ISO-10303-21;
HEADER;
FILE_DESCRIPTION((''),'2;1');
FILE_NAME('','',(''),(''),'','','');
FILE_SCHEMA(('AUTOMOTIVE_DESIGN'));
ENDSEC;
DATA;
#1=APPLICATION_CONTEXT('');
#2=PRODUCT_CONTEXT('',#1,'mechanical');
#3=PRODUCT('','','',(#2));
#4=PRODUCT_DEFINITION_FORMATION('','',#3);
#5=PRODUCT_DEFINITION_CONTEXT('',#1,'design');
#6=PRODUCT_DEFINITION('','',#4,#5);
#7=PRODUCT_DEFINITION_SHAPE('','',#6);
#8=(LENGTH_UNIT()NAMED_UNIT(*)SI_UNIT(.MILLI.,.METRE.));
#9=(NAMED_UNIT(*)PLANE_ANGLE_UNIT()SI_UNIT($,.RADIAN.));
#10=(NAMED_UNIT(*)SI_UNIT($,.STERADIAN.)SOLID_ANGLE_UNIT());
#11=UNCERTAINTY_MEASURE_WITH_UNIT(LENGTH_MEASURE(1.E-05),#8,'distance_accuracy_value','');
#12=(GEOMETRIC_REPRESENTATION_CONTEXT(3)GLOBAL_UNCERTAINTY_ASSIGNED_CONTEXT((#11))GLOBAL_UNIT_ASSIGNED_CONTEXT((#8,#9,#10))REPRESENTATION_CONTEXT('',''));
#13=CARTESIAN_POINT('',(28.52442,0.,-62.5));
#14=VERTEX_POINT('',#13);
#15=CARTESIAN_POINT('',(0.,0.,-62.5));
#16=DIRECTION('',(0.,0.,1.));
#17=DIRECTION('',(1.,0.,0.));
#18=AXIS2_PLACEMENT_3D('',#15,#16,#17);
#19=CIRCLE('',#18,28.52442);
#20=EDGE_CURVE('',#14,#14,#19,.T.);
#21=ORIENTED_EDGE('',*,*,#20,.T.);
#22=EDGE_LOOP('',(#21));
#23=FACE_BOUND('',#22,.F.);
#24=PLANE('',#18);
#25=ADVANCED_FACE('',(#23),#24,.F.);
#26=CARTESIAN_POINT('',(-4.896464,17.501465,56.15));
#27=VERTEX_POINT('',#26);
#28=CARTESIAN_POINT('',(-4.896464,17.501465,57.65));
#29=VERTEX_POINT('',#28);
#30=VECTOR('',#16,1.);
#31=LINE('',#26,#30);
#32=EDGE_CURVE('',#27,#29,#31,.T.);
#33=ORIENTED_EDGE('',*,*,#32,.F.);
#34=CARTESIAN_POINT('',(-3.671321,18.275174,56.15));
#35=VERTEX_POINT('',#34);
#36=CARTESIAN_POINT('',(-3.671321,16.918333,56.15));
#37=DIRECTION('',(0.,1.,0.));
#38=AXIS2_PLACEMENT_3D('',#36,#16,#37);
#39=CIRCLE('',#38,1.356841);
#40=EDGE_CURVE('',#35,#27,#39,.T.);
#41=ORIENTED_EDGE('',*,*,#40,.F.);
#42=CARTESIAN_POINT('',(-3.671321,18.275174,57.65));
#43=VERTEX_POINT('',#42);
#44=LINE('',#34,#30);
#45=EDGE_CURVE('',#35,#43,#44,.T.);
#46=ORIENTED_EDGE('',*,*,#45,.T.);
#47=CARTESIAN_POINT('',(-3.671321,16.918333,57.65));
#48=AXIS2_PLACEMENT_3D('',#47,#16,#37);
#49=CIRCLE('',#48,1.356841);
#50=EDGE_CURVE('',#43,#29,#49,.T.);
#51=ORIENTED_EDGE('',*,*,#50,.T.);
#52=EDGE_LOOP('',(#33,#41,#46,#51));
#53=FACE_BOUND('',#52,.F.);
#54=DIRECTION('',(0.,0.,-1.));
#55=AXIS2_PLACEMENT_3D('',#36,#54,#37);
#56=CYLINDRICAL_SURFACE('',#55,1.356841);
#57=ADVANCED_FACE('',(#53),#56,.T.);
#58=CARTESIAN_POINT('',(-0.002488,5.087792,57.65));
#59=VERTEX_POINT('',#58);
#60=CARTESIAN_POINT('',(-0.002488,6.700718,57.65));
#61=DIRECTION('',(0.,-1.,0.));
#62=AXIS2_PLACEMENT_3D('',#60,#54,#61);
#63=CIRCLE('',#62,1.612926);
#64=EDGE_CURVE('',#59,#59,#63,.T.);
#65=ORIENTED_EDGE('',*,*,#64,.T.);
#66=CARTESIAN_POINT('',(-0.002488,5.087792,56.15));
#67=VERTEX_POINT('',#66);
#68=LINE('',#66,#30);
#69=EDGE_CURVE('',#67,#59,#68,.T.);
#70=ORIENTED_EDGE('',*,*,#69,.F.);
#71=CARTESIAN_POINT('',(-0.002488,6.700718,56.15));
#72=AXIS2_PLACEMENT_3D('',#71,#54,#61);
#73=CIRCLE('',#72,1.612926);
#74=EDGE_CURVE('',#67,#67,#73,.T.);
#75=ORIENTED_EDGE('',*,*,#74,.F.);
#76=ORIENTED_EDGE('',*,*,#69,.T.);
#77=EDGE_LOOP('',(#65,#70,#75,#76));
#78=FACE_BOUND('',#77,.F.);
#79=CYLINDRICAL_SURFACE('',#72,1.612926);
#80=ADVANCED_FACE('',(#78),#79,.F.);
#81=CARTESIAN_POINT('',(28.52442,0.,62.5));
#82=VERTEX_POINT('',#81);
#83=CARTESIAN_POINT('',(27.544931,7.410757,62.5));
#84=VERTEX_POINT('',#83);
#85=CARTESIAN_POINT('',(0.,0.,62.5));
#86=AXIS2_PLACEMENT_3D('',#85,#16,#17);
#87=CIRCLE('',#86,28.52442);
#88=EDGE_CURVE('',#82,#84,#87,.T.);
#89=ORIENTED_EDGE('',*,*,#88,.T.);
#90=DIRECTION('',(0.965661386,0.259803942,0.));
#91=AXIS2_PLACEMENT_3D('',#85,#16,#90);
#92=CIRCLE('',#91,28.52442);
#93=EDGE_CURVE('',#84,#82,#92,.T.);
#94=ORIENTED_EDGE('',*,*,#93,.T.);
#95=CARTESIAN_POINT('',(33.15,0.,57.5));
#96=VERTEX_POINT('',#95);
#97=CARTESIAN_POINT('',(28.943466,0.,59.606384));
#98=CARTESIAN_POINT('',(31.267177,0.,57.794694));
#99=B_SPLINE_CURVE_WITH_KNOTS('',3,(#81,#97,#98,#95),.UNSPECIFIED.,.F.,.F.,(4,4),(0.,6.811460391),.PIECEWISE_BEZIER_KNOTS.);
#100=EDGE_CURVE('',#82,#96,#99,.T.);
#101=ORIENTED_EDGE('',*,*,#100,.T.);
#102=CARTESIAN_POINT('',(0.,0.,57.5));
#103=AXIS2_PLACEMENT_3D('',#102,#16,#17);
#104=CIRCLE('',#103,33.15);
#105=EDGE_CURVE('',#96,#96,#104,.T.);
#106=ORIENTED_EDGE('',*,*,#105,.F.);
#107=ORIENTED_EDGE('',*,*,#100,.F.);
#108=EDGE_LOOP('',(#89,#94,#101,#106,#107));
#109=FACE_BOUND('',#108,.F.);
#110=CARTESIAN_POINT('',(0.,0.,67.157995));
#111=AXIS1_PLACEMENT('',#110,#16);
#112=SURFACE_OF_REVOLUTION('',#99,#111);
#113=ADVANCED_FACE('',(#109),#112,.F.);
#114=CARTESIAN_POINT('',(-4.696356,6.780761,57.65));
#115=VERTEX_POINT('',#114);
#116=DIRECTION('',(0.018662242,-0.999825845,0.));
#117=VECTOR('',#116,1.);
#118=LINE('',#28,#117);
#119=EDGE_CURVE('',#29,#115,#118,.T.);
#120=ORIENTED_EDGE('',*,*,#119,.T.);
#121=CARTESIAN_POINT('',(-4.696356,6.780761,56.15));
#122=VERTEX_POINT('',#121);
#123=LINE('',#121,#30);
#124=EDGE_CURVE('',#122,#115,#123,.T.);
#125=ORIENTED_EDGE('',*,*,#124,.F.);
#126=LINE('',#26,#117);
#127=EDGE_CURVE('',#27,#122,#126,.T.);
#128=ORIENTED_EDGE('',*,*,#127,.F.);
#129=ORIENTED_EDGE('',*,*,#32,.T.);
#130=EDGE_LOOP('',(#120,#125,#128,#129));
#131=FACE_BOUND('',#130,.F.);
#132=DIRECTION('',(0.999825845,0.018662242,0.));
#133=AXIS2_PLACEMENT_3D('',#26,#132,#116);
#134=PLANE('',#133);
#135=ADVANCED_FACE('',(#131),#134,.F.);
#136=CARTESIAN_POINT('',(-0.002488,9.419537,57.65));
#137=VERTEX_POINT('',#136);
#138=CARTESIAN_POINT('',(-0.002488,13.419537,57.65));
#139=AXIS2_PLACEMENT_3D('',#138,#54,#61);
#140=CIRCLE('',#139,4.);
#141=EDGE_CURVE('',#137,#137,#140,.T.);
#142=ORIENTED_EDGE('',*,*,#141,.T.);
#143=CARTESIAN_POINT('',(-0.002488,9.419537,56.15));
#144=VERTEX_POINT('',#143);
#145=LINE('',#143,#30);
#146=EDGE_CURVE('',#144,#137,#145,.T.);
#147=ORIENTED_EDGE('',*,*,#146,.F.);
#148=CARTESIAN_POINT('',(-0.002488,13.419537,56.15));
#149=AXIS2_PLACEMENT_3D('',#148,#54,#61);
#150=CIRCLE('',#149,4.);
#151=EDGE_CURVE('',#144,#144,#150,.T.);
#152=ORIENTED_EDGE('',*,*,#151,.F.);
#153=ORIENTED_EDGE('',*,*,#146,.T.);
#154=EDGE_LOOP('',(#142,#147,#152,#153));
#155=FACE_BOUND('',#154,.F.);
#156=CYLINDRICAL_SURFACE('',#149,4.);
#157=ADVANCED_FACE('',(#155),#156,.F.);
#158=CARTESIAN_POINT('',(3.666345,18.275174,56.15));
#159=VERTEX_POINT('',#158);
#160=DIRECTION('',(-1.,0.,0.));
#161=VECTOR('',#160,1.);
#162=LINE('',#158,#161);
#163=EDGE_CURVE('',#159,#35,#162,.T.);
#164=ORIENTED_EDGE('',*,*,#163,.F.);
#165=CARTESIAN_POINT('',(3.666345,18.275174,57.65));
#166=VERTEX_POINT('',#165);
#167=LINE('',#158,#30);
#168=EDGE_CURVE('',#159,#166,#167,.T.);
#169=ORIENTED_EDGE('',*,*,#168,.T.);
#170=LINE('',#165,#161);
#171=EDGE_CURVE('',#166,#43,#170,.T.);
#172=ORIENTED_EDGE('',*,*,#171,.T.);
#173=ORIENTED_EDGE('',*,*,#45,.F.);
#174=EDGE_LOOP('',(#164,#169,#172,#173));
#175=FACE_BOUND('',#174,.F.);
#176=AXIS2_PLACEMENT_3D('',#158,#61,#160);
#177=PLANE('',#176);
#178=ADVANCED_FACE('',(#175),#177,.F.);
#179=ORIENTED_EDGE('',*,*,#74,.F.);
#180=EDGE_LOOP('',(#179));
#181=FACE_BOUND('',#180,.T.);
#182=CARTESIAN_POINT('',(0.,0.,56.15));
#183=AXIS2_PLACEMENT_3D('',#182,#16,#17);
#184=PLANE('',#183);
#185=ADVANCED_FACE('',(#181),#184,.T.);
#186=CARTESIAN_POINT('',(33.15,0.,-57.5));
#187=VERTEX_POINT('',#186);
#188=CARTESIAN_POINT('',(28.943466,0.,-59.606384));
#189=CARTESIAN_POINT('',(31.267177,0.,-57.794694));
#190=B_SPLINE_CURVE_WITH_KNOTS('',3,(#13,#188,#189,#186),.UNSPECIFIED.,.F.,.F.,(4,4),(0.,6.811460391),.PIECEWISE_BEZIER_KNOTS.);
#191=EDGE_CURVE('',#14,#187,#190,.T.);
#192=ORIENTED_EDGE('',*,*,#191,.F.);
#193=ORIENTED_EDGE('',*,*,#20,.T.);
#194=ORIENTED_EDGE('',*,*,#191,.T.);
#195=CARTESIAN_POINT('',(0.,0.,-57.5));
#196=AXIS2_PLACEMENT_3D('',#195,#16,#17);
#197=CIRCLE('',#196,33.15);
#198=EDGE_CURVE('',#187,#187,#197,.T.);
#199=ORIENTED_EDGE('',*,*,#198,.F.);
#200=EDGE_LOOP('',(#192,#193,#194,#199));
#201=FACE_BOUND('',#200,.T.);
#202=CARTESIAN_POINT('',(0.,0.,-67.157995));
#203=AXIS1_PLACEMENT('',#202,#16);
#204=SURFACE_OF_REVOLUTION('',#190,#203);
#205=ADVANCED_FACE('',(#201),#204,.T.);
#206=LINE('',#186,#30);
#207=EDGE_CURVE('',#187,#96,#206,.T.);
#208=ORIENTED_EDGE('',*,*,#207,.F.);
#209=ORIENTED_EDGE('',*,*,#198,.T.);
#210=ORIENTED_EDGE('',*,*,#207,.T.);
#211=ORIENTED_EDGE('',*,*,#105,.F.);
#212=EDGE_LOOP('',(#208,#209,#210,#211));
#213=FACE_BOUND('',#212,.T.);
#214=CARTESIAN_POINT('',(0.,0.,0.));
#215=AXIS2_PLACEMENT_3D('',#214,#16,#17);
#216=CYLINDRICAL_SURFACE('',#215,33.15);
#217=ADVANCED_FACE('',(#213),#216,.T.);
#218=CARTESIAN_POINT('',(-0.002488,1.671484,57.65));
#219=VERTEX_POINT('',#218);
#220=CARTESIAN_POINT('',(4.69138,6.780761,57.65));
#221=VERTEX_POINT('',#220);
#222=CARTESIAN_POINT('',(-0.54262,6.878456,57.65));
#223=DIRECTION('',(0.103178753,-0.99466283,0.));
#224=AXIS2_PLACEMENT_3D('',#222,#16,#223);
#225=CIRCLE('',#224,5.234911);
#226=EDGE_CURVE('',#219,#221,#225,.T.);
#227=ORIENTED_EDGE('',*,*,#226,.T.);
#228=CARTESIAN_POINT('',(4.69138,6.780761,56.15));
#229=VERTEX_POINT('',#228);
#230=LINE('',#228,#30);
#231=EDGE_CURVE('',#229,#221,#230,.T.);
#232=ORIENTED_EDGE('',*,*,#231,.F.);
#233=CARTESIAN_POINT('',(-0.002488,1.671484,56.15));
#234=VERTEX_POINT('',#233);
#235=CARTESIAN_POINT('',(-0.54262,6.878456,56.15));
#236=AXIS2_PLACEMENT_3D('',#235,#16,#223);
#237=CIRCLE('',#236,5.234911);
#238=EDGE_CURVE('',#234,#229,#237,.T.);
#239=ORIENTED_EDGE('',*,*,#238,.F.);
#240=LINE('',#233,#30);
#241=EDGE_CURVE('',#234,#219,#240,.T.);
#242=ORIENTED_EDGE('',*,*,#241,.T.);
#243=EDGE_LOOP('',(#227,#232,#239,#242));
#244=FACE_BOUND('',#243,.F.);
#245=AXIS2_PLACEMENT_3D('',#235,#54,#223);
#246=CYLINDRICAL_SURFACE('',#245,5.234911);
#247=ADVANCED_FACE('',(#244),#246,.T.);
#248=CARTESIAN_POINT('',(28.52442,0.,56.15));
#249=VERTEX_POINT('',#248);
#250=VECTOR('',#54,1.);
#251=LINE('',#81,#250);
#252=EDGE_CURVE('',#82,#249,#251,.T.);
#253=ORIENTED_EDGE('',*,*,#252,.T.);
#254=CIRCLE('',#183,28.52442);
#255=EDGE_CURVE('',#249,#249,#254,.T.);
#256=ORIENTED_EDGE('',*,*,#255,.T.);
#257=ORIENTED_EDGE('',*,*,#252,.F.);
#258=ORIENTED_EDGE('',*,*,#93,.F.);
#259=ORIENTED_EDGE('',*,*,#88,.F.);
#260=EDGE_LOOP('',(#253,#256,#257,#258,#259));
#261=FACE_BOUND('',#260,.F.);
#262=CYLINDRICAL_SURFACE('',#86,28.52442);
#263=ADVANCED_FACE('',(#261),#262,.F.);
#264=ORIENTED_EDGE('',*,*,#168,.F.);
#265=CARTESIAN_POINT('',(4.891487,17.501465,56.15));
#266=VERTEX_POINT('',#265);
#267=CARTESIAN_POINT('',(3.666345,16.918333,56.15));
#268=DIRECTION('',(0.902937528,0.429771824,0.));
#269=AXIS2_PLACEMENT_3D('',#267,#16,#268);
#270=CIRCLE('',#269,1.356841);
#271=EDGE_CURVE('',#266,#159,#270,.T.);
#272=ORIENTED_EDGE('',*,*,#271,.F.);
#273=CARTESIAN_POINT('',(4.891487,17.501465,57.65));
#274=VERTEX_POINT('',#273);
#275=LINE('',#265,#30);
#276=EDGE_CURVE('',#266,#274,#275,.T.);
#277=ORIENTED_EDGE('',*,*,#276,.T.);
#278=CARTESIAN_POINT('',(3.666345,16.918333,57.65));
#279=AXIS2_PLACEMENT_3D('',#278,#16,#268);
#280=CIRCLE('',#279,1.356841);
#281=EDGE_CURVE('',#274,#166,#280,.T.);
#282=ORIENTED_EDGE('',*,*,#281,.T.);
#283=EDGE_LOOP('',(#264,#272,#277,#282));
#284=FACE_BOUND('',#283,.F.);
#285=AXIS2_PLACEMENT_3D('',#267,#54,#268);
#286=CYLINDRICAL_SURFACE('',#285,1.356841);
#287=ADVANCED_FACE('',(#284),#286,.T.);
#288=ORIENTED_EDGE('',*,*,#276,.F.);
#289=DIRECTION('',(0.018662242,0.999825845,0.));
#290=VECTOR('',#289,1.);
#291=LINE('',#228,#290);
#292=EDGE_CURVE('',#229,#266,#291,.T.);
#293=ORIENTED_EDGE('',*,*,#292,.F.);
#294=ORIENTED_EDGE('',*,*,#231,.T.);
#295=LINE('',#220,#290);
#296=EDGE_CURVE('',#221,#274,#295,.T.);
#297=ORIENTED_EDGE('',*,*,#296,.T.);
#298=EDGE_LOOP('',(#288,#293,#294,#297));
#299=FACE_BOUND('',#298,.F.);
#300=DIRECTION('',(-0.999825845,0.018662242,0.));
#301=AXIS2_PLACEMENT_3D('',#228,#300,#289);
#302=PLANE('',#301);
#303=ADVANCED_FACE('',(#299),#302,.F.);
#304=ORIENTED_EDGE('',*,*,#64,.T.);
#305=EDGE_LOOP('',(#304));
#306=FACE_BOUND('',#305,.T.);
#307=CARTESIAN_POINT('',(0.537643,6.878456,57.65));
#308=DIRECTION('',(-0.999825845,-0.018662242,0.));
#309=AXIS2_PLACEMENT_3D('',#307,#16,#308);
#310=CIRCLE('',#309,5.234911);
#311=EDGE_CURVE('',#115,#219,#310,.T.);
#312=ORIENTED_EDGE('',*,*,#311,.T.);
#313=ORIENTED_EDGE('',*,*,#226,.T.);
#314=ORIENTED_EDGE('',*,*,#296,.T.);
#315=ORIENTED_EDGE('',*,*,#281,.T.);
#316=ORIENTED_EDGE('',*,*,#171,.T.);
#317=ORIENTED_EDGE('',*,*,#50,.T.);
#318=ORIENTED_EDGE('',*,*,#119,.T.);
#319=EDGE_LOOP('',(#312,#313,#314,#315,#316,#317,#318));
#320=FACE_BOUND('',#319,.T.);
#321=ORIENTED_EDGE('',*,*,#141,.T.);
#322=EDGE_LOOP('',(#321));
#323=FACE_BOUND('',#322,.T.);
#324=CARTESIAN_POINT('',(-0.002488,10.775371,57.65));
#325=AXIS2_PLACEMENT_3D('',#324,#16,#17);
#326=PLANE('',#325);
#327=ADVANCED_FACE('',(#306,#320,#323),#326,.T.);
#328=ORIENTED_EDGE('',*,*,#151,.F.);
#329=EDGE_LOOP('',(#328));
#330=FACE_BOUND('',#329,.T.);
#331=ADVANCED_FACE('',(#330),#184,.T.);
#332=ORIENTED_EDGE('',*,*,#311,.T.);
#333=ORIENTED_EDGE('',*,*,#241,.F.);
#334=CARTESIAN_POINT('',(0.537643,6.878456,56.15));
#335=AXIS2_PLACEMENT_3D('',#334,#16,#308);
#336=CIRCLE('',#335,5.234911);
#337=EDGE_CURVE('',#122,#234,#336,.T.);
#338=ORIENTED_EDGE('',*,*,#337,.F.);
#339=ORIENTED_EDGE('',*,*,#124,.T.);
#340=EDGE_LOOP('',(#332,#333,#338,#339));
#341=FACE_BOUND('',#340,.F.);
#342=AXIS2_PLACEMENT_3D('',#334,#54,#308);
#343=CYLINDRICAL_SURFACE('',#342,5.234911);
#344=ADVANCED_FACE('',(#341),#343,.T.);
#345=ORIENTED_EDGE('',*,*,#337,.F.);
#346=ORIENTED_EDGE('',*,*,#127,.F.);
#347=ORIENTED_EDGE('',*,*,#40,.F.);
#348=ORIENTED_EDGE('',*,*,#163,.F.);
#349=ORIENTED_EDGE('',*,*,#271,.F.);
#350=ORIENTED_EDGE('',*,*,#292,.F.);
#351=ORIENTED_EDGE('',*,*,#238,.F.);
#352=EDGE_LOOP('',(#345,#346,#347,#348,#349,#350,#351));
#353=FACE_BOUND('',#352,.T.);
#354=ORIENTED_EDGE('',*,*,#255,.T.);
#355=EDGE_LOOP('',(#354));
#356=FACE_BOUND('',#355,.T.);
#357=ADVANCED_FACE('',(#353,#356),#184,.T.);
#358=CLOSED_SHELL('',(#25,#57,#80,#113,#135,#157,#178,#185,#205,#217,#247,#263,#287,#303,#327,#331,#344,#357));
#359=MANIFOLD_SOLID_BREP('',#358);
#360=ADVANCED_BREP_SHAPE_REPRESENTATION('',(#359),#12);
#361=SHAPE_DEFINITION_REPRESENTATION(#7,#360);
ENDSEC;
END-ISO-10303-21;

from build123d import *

# Parameters (mm, degrees)
F0_R      = 33.15
F1_DEPTH  = 57.5
F3_DEPTH  = 5
F8_DEPTH  = 5
F9_DEPTH  = 3.048
F10_R     = 28.5244197483
F11_DEPTH = 6.35
F14_DEPTH = 1.5


# Not quite as in the source:
# - a feature names something its author has since deleted; it is built from what else it names


with BuildPart() as f1:
    # F0 (on Top) → F1 (new body, symmetric)
    with BuildSketch(Plane.XY):
        Circle(F0_R)
    extrude(amount=F1_DEPTH, both=True)

    # F2 (on face) → F3 (join)
    with BuildSketch(Plane.XY.offset(57.5)):
        with BuildLine():
            ThreePointArc((27.5449306971, 7.4107567004), (-28.2784872926, -3.7376032987), (28.5244197483, 0))
            ThreePointArc((28.5244197483, 0), (28.2784872926, 3.7376032987), (27.5449306971, 7.4107567004))
        make_face()
        with BuildLine():
            Line((-3.6688328255, 16.6036896408), (0, 16.6036896408))
            Line((0, 16.6036896408), (3.6688328255, 16.6036896408))
            ThreePointArc((3.6688328255, 16.6036896408), (4.3933325809, 16.3940702991), (4.8939753324, 15.8299807676))
            Line((4.8939753324, 15.8299807676), (4.6938681044, 5.1092766225))
            ThreePointArc((4.6938681044, 5.1092766225), (3.3149072999, 1.6653658978), (0, 0))
            ThreePointArc((0, 0), (-3.3149072999, 1.6653658978), (-4.6938681044, 5.1092766225))
            Line((-4.6938681044, 5.1092766225), (-4.8939753324, 15.8299807676))
            ThreePointArc((-4.8939753324, 15.8299807676), (-4.3933325809, 16.3940702991), (-3.6688328255, 16.6036896408))
        make_face(mode=Mode.SUBTRACT)
    extrude(amount=F3_DEPTH)

    # F7: F6 across plane


with BuildPart() as f6:
    # F4 (on Front) → F6 (revolve)
    with BuildSketch(Plane.XZ):
        with BuildLine():
            add(Edge.make_bspline(
                [(28.5244197483, 62.5), (28.9434660226, 59.606384486), (31.2671773136, 57.7946938574), (33.15, 57.5)],
                knots=[0, 0, 0, 0, 6.8114603915, 6.8114603915, 6.8114603915, 6.8114603915], degree=3))
            Line((28.5244197483, 62.5), (28.5244197483, 57.5))
            Line((28.5244197483, 57.5), (33.15, 57.5))
        make_face()
    revolve(axis=Axis((0, 0, 67.1579949558), (0, 0, 1)))


with BuildPart() as f1_1:
    add(f1.part)
    add(f6.part.mirror(Plane.XY))

    # F8 (add): a face of the model
    f8_faces = [f1_1.faces().sort_by_distance(p)[0] for p in [
        (0, 0, -57.5),
    ]]
    extrude(f8_faces, amount=F8_DEPTH)

    # F9 (add): a face of the model
    f9_faces = [f1_1.faces().sort_by_distance(p)[0] for p in [
        (0, -0.5407612008, 62.5),
    ]]

    add(f6.part)  # F9 merges F6
    extrude(f9_faces, amount=-F9_DEPTH)

    # F10 (on face) → F11 (cut)
    with BuildSketch(Plane.XY.offset(62.5)):
        Circle(F10_R)
    extrude(amount=-F11_DEPTH, mode=Mode.SUBTRACT)

    # F13 (on face) → F14 (join)
    with BuildSketch(Plane.XY.offset(56.15)):
        with BuildLine():
            Line((3.6663445585, 18.275173819), (-0.002488267, 18.275173819))
            Line((-0.002488267, 18.275173819), (-3.6713210925, 18.275173819))
            ThreePointArc((-3.6713210925, 18.275173819), (-4.395820848, 18.0655544773), (-4.8964635994, 17.5014649459))
            Line((-4.8964635994, 17.5014649459), (-4.6963563714, 6.7807608008))
            ThreePointArc((-4.6963563714, 6.7807608008), (-3.3173955669, 3.336850076), (-0.002488267, 1.6714841783))
            ThreePointArc((-0.002488267, 1.6714841783), (3.3124190329, 3.336850076), (4.6913798374, 6.7807608008))
            Line((4.6913798374, 6.7807608008), (4.8914870654, 17.5014649459))
            ThreePointArc((4.8914870654, 17.5014649459), (4.3908443139, 18.0655544773), (3.6663445585, 18.275173819))
        make_face()
        with BuildLine():
            ThreePointArc((-0.002488267, 8.3136439422), (1.6104378587, 6.7007178165), (-0.002488267, 5.0877916907))
            ThreePointArc((-0.002488267, 5.0877916907), (-1.6154143928, 6.7007178165), (-0.002488267, 8.3136439422))
        make_face(mode=Mode.SUBTRACT)
        with BuildLine():
            ThreePointArc((-0.002488267, 17.4195373118), (3.997511733, 13.4195373118), (-0.002488267, 9.4195373118))
            ThreePointArc((-0.002488267, 9.4195373118), (-4.002488267, 13.4195373118), (-0.002488267, 17.4195373118))
        make_face(mode=Mode.SUBTRACT)
    extrude(amount=F14_DEPTH)


solid = f1_1.part
